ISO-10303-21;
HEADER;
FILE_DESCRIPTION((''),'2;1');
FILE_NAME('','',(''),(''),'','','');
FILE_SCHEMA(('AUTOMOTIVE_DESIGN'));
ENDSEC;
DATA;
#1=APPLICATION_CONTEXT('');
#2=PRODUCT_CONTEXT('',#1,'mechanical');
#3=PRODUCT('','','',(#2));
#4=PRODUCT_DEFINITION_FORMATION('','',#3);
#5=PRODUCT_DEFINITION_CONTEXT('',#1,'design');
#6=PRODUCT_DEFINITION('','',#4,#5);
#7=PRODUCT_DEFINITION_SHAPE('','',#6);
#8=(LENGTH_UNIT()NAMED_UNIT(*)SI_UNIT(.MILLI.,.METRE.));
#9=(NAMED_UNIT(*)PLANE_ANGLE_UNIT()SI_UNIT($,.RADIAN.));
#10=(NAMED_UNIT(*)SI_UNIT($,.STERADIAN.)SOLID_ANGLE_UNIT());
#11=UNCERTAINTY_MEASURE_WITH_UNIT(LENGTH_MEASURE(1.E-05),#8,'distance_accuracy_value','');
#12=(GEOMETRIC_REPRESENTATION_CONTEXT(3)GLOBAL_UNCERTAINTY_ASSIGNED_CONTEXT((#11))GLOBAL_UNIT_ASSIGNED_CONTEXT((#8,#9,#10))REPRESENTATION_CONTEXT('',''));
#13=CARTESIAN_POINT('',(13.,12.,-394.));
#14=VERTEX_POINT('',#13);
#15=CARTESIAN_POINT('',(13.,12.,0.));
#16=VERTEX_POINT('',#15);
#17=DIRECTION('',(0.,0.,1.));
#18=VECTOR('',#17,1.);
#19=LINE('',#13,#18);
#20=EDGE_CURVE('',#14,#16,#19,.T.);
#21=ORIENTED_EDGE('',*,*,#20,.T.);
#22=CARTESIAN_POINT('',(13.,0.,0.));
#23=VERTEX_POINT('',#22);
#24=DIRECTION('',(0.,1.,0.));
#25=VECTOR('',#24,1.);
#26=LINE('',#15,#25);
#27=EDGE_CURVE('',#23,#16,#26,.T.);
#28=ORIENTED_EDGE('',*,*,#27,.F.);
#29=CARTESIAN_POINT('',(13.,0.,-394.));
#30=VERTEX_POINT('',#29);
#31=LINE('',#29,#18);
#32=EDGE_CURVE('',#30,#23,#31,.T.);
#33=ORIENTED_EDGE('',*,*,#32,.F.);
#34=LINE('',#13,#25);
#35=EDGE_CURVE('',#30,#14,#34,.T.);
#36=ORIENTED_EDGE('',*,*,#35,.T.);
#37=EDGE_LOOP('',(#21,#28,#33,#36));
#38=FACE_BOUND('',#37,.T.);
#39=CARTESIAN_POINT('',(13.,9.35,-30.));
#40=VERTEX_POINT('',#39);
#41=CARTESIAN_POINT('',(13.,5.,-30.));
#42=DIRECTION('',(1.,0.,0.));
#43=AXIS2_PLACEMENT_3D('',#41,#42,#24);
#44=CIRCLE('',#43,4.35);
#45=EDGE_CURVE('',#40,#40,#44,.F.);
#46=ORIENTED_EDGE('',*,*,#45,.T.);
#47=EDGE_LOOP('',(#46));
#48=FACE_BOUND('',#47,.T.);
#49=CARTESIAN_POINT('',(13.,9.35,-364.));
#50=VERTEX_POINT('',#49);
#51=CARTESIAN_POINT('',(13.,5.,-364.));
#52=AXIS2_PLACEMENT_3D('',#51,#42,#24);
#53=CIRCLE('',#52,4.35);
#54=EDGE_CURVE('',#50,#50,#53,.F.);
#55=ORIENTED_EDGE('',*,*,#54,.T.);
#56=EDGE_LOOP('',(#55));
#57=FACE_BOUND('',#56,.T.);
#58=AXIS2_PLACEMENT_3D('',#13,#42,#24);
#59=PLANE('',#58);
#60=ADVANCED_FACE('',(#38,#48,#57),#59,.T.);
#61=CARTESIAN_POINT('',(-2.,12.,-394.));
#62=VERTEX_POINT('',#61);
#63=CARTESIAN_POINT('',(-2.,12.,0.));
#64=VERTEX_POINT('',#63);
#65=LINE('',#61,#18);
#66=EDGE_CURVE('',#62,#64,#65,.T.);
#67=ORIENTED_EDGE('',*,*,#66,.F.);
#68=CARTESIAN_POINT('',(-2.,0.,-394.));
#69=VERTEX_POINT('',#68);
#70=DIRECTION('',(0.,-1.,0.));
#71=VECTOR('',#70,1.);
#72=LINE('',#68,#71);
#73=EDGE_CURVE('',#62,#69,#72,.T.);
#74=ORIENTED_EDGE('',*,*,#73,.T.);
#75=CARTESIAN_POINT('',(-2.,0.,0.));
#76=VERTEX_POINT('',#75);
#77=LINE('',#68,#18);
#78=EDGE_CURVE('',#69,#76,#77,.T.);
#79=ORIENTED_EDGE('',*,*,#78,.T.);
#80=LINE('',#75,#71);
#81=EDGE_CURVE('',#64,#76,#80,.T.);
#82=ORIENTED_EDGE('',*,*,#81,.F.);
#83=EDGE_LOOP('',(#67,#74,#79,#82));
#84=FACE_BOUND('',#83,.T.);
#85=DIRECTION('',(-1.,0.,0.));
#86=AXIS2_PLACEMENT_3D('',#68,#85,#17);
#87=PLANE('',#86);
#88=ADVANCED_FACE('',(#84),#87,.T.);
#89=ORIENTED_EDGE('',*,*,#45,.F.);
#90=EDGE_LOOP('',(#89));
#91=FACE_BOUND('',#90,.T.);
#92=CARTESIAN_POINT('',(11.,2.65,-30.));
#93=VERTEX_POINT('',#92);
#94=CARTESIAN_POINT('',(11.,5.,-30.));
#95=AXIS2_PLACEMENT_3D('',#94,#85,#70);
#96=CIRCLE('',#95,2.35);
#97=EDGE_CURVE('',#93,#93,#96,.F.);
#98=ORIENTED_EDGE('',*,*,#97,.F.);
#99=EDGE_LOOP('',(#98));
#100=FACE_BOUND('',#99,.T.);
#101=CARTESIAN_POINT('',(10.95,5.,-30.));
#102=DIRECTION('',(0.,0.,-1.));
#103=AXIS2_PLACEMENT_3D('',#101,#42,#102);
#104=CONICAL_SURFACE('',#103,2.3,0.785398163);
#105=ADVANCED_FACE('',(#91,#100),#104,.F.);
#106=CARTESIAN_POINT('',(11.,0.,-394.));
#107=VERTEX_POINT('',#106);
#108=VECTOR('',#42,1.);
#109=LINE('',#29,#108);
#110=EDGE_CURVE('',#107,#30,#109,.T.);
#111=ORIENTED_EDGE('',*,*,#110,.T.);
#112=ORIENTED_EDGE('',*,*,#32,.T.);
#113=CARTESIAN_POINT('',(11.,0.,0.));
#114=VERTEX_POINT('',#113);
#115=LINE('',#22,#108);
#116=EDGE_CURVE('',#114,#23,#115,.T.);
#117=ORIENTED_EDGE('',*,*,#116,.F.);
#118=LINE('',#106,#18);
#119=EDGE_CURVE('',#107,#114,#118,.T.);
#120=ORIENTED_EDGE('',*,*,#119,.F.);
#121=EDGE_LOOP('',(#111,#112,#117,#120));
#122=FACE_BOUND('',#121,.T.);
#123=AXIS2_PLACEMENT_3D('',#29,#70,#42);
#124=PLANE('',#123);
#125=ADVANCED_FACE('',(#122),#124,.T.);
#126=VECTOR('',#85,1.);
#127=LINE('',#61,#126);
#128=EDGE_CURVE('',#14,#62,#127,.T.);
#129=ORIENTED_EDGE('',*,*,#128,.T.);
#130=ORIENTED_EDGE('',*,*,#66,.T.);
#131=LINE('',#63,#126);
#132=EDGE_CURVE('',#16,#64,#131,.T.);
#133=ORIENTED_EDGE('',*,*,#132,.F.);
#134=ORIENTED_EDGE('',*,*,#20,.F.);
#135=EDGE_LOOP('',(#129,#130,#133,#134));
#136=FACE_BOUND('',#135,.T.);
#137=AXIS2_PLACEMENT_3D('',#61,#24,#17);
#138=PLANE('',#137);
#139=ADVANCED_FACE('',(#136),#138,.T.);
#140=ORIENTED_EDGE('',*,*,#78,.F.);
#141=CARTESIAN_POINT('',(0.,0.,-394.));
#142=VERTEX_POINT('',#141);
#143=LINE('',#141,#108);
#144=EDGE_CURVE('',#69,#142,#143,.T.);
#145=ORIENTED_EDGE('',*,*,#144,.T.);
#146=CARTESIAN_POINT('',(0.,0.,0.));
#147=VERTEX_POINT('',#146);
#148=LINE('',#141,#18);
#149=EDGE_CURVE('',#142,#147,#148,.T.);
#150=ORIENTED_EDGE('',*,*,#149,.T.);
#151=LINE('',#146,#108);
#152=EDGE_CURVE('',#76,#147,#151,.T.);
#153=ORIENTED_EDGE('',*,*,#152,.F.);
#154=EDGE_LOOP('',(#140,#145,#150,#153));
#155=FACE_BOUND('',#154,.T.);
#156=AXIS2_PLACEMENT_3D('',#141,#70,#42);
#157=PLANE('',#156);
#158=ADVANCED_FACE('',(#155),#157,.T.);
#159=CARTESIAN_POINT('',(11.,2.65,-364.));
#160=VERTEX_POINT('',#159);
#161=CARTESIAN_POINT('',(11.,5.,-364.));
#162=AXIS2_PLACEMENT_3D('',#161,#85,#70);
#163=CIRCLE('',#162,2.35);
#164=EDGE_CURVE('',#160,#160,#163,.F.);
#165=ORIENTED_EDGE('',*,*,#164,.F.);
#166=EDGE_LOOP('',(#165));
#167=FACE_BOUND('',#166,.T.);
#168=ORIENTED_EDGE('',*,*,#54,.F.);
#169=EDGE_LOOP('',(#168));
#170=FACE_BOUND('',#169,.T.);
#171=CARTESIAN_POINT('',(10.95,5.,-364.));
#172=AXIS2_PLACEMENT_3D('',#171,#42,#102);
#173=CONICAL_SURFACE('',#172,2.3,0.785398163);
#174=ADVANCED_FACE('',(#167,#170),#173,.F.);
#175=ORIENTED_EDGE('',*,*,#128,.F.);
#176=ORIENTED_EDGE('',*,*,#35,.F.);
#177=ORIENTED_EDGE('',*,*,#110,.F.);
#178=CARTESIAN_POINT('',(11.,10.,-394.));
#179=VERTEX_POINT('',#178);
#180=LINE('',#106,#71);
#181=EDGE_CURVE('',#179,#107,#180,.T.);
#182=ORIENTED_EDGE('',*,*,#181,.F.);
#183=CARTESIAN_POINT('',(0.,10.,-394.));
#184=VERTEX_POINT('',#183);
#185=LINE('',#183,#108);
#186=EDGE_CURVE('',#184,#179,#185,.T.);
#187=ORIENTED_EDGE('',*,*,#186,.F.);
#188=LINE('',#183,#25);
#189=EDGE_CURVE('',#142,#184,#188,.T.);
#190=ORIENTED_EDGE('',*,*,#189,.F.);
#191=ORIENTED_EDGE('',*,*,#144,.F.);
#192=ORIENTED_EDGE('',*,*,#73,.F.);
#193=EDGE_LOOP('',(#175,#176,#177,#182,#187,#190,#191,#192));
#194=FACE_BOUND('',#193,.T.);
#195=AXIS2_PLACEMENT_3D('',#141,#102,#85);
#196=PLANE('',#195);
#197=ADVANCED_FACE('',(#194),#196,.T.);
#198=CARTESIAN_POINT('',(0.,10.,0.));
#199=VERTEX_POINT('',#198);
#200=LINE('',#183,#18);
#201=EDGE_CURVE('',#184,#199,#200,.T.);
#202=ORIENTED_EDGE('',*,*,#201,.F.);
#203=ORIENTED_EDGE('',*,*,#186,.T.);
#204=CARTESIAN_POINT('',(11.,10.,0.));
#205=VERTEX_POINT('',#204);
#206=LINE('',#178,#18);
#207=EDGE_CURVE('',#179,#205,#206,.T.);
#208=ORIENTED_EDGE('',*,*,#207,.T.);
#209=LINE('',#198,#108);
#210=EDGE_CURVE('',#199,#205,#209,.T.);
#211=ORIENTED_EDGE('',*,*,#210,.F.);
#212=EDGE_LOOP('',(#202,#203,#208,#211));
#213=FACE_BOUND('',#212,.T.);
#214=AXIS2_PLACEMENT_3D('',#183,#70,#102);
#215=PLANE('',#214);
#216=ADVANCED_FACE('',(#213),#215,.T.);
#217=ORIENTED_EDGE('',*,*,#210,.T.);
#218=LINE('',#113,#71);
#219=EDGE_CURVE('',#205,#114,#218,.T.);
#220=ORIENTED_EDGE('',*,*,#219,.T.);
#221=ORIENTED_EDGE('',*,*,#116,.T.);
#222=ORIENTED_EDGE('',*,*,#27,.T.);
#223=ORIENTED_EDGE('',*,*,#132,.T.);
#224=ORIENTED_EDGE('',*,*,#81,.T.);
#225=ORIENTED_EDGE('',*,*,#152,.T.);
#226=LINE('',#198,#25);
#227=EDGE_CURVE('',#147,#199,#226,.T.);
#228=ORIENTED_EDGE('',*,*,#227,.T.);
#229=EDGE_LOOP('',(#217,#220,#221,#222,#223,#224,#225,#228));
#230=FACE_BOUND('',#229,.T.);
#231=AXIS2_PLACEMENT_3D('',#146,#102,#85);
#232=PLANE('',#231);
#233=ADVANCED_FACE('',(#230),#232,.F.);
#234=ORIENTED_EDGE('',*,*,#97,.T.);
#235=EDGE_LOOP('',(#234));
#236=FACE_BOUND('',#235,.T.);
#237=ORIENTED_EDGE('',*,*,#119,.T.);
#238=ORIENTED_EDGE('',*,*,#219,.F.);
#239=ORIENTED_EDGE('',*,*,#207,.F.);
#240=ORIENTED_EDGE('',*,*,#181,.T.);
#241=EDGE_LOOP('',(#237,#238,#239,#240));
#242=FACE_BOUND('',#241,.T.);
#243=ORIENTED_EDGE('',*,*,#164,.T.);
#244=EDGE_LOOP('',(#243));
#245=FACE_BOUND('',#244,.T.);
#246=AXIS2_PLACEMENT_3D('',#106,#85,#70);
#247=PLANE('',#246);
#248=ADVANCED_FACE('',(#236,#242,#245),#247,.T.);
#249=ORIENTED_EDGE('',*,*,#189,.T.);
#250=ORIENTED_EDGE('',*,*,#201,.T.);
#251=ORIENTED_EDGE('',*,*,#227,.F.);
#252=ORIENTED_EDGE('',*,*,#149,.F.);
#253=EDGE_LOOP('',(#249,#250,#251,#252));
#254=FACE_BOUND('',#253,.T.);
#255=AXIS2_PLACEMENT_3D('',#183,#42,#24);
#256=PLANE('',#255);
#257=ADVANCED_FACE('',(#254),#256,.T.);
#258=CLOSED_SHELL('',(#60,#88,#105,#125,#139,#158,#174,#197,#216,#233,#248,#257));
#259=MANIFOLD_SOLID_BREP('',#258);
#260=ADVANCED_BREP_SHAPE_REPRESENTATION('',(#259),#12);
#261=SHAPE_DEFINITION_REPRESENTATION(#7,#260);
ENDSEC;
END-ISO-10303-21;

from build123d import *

# Parameters (mm, degrees)
SM_BASE_FLANGE_2_DEPTH = 394
SKETCH_7_R             = 2.3
CUT_EXTRUDE_1_DEPTH    = 2
CHAMFER_1_SIZE         = 2.05


# Sheet-metal steps are written as plain solids
with BuildPart() as part:
    # Эскиз6 → Базовая кромка2 (new body)
    with BuildSketch(Plane.XY):
        Polygon((0, 0), (-2, 0), (-2, 12), (13, 12), (13, 0), (11, 0), (11, 10), (0, 10), align=None)
    extrude(amount=-SM_BASE_FLANGE_2_DEPTH)

    # Эскиз7 → Вырез-Вытянуть1 (cut)
    with BuildSketch(Plane(origin=(13, 0, 0), x_dir=(0, 0, -1), z_dir=(1, 0, 0))):
        with Locations((30, 5)):
            Circle(SKETCH_7_R)
        with Locations((364, 5)):
            Circle(SKETCH_7_R)
    extrude(amount=-CUT_EXTRUDE_1_DEPTH, mode=Mode.SUBTRACT)

    # Фаска1
    # the kernel refuses this chamfer: 2.05 mm, written as the material it takes off along each edge
    with BuildSketch(Plane(origin=(13, 5, -364), x_dir=(0, 0, -1), z_dir=(0, -1, 0))) as chamfer_1_piece_1:
        Polygon((2.3 + CHAMFER_1_SIZE, 0), (2.3, -CHAMFER_1_SIZE), (2.3, 0), align=None)
    revolve(axis=Axis((13, 5, -364), (1, 0, 0)), mode=Mode.SUBTRACT)
    with BuildSketch(Plane(origin=(13, 5, -30), x_dir=(0, 0, -1), z_dir=(0, -1, 0))) as chamfer_1_piece_2:
        Polygon((2.3 + CHAMFER_1_SIZE, 0), (2.3, -CHAMFER_1_SIZE), (2.3, 0), align=None)
    revolve(axis=Axis((13, 5, -30), (1, 0, 0)), mode=Mode.SUBTRACT)


solid = part.part
